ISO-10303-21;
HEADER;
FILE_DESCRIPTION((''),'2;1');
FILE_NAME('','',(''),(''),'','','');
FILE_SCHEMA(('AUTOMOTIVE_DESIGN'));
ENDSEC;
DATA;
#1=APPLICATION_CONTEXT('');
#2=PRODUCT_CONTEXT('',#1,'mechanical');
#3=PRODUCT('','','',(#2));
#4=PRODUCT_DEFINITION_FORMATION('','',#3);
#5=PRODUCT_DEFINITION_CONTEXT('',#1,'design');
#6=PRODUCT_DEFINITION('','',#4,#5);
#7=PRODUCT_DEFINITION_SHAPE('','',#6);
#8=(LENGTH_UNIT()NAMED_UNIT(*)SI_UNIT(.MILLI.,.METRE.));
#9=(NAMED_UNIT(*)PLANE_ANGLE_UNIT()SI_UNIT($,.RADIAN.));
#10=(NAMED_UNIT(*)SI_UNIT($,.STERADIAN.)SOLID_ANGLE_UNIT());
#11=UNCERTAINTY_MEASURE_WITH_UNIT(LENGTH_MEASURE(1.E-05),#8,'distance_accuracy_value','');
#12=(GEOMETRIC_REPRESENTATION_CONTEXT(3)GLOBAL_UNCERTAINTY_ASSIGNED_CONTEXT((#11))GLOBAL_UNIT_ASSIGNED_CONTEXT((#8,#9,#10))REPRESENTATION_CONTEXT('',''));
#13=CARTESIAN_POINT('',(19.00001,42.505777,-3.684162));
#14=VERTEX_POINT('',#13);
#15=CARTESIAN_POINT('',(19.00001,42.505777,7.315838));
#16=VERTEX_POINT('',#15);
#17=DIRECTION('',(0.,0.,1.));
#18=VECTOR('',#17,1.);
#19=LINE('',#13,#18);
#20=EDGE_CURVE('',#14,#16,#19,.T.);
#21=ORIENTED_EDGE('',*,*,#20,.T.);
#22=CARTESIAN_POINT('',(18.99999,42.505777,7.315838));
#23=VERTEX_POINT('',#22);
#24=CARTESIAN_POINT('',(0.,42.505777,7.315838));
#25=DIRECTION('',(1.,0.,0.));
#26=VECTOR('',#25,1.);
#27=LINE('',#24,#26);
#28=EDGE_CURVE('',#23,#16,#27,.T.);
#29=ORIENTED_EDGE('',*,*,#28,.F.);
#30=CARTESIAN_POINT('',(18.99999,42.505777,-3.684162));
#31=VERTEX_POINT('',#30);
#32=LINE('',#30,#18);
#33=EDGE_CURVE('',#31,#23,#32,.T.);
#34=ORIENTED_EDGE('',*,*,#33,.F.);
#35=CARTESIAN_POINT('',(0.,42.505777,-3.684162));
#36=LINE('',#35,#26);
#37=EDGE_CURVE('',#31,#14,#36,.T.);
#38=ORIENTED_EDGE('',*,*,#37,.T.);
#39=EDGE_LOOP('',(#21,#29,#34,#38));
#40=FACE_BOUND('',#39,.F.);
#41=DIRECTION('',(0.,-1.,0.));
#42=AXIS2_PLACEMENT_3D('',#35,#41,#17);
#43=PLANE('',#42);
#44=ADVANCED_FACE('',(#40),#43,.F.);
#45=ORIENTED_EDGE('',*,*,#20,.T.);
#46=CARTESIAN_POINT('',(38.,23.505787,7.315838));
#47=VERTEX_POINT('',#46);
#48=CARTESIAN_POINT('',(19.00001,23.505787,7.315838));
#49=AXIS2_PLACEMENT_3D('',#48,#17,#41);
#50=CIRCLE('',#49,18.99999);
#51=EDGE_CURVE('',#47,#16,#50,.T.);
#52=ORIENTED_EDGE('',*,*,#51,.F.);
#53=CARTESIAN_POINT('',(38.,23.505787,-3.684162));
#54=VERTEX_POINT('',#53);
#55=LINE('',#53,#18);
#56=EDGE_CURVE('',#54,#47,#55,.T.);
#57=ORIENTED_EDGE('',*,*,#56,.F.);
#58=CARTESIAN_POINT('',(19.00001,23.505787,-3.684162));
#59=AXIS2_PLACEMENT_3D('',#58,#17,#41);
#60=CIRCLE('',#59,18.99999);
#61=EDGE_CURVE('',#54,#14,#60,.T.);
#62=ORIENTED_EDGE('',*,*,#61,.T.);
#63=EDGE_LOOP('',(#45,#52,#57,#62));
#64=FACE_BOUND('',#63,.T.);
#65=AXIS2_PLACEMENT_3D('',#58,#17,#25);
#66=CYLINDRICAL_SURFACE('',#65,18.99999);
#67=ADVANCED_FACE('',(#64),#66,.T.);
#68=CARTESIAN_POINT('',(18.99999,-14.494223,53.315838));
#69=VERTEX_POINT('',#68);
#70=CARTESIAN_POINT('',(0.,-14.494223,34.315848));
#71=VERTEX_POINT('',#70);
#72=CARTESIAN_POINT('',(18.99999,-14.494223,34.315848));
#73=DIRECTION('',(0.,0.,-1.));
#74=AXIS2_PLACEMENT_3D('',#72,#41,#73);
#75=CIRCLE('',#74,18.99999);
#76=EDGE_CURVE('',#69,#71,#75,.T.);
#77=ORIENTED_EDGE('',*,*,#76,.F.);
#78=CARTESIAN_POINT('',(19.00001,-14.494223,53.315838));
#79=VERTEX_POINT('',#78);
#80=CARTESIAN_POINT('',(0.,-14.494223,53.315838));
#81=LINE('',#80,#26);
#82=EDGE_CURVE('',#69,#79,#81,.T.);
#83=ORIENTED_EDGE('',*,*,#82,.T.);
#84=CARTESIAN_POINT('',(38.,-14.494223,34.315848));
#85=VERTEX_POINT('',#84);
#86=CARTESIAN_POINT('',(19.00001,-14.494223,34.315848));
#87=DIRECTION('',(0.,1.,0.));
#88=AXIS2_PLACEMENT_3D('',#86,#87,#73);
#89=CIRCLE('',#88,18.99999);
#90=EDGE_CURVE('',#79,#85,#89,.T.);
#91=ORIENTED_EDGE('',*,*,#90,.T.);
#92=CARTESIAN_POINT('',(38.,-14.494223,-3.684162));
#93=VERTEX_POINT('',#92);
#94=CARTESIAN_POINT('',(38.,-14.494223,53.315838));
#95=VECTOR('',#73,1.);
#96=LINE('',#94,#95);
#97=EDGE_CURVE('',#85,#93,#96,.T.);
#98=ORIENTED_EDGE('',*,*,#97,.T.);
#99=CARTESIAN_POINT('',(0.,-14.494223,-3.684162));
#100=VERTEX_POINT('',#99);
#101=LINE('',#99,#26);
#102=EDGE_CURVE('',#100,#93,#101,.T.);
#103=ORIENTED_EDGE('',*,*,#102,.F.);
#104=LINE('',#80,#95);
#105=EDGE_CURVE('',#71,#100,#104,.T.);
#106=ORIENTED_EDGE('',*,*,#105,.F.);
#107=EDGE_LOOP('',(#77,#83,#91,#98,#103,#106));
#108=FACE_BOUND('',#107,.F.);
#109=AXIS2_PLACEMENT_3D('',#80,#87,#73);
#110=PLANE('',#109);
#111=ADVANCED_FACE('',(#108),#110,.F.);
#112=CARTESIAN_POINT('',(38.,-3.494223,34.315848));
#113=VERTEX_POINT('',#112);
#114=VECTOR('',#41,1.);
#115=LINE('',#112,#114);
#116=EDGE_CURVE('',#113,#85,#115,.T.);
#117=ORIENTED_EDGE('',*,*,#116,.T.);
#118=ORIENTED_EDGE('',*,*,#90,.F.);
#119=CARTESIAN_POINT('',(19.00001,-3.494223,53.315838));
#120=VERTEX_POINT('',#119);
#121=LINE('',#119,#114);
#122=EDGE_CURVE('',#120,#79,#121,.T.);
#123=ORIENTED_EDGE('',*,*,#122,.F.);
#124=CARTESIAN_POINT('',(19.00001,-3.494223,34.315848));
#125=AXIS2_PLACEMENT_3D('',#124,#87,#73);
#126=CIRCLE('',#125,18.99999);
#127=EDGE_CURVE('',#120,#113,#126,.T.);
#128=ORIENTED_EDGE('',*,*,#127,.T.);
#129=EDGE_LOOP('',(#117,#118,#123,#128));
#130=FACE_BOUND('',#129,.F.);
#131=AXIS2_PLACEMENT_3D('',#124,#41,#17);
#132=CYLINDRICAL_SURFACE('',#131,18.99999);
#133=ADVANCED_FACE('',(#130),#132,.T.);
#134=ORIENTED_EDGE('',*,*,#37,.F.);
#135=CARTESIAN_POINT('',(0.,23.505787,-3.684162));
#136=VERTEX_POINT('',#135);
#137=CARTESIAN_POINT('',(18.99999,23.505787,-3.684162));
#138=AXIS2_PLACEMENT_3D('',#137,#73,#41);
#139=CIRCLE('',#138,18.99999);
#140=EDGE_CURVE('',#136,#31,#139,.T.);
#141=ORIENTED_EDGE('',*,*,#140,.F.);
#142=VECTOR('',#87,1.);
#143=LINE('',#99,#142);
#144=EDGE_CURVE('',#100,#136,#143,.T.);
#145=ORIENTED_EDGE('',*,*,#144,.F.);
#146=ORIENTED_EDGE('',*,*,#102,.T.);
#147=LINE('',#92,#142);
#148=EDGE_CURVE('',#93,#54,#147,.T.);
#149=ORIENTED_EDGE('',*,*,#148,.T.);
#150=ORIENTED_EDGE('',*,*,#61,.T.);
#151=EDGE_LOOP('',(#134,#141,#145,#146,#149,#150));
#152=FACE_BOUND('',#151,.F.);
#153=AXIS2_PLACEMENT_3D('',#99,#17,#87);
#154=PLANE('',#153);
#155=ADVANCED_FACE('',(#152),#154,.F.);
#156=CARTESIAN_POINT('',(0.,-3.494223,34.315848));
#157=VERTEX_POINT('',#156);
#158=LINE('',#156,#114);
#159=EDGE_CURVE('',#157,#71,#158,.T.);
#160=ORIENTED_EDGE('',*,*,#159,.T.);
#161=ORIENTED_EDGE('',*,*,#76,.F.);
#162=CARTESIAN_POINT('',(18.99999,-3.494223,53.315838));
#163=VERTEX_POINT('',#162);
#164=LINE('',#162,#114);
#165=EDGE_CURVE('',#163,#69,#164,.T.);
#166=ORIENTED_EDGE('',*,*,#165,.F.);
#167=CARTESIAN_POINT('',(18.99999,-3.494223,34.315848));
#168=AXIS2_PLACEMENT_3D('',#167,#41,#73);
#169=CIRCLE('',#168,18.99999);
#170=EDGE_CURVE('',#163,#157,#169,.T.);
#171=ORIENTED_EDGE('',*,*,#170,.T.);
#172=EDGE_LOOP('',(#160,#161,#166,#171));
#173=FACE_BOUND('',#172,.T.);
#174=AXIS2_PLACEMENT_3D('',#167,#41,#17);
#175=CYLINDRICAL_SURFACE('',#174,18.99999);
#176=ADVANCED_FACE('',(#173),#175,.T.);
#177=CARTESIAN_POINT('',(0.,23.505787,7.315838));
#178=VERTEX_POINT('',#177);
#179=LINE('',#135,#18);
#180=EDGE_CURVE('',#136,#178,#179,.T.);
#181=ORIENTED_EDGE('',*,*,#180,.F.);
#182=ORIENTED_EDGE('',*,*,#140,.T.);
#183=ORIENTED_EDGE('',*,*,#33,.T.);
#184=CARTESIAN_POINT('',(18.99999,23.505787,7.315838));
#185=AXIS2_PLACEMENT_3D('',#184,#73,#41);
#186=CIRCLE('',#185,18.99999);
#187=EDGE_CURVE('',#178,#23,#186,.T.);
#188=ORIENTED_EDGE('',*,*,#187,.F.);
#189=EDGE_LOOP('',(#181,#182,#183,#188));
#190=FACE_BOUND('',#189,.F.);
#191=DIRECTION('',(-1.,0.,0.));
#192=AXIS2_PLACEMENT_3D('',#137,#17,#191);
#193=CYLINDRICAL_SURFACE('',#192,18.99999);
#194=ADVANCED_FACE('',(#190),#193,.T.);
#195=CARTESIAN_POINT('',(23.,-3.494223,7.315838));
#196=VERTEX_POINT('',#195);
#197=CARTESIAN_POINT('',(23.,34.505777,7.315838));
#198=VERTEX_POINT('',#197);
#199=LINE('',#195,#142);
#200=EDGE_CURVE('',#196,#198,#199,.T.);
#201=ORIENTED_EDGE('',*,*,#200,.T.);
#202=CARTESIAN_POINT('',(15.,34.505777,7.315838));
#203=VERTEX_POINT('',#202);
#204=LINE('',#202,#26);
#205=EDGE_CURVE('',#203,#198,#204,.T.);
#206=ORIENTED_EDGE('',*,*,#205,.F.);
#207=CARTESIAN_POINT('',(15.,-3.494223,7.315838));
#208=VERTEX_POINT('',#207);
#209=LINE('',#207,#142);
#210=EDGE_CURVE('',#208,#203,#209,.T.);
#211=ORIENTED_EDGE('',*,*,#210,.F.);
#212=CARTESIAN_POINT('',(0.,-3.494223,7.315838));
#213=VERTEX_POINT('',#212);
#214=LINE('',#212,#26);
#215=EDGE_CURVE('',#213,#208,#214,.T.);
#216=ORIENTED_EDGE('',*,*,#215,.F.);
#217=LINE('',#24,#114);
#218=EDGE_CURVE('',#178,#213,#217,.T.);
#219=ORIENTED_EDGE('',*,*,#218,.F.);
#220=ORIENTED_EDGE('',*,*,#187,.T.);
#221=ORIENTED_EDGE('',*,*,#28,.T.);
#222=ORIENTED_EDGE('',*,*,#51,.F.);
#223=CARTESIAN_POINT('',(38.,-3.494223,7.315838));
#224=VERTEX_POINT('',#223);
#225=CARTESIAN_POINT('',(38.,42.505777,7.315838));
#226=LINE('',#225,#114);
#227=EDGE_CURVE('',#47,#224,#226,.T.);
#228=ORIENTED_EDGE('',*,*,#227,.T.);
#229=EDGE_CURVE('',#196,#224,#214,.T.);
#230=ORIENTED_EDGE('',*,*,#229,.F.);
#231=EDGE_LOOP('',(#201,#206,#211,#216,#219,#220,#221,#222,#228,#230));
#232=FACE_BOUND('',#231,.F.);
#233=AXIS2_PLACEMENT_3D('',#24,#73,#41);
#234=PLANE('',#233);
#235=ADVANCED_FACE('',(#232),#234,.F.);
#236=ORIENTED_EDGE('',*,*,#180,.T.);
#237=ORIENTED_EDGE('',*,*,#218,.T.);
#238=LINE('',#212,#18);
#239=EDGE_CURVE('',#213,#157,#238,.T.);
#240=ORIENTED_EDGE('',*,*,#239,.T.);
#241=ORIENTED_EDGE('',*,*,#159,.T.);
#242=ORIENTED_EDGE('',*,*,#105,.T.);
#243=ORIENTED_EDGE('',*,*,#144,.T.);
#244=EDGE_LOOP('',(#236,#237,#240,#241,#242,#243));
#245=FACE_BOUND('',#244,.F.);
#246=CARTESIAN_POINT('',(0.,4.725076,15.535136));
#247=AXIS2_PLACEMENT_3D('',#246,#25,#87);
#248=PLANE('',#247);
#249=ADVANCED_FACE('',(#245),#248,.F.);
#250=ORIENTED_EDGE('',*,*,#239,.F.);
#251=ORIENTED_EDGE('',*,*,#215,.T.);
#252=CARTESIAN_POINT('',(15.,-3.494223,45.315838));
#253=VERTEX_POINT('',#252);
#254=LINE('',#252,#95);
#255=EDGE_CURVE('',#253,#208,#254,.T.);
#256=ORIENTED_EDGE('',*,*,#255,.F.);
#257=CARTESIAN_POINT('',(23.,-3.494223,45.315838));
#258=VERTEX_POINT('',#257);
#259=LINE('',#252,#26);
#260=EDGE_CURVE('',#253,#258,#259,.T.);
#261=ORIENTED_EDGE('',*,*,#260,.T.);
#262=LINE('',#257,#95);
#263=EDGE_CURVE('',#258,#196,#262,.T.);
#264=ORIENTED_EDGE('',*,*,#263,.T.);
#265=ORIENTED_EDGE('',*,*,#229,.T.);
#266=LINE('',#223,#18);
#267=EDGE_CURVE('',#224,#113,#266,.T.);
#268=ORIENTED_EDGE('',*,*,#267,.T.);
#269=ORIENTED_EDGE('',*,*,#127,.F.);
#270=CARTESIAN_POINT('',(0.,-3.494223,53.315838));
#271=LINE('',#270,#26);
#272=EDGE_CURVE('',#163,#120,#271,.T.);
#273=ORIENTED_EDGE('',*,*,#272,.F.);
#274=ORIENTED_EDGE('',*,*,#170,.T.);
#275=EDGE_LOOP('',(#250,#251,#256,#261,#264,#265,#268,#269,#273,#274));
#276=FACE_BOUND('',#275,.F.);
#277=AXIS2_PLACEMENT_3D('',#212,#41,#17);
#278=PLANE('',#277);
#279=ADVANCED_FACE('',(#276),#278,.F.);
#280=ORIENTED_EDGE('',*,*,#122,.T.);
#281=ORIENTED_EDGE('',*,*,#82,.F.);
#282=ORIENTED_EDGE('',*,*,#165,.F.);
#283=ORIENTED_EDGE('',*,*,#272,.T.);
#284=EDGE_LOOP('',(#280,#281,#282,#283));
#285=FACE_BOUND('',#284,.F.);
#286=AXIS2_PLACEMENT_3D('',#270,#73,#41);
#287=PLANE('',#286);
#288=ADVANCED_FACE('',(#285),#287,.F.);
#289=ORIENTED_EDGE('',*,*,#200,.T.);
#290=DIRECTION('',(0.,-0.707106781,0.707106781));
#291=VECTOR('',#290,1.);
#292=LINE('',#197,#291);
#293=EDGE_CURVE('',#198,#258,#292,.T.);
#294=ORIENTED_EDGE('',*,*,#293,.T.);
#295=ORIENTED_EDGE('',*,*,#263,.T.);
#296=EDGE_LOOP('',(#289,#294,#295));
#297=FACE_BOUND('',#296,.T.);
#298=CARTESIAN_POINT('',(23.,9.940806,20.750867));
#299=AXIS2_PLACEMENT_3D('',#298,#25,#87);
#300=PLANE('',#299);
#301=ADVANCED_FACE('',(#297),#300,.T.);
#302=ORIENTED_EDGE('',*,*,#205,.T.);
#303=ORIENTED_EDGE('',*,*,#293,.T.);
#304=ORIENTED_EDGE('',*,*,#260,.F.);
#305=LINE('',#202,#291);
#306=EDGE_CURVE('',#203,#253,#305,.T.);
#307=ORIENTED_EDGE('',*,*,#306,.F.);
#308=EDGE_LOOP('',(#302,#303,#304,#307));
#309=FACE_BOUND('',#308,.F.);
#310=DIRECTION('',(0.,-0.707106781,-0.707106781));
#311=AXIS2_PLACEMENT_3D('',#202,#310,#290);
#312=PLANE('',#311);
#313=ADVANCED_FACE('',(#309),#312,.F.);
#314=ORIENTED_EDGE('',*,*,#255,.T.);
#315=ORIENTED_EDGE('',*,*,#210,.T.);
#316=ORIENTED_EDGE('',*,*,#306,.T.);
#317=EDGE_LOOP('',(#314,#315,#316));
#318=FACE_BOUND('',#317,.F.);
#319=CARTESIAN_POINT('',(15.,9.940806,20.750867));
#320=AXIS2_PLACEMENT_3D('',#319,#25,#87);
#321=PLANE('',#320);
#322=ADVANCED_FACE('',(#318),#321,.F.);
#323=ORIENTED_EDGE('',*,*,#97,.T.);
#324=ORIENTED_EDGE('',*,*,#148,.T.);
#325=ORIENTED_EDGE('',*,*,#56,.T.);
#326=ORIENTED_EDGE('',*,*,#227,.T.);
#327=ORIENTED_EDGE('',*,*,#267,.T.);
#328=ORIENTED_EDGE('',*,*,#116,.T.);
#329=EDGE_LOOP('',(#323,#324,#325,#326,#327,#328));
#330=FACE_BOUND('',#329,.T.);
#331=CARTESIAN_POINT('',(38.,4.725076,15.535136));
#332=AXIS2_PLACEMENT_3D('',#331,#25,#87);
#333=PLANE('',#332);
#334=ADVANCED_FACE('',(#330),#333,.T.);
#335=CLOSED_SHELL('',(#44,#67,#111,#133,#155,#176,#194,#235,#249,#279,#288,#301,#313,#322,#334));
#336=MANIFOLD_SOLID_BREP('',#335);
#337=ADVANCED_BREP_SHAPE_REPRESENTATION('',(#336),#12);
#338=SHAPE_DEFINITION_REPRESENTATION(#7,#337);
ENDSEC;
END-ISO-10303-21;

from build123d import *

# Parameters (mm, degrees)
F1_DEPTH = 38
F2_R     = 18.99999
F3_R     = 18.99999
F6_DEPTH = 8


# Not quite as in the source:
# - a fillet or chamfer is up to 0.001 mm smaller than in the source, because OpenCascade refuses the exact size


with BuildPart() as f1:
    # F0 (on Right) → F1 (new body)
    with BuildSketch(Plane.YZ):
        Polygon((-14.4942225739, 53.3158381923), (-14.4942225739, -3.6841618077), (42.5057774261, -3.6841618077), (42.5057774261, 7.3158381923), (-3.4942225739, 7.3158381923), (-3.4942225739, 53.3158381923), align=None)
    extrude(amount=F1_DEPTH)

    # F2 (radius 19 in the source; OpenCascade refuses exactly that, so slightly less here)
    f2_edges = [f1.edges().sort_by_distance(p)[0] for p in [
        (38, -8.994223, 53.315838),
        (0, -8.994223, 53.315838),
    ]]
    fillet(f2_edges, radius=F2_R)

    # F3 (radius 19 in the source; OpenCascade refuses exactly that, so slightly less here)
    f3_edges = [f1.edges().sort_by_distance(p)[0] for p in [
        (38, 42.505777, 1.815838),
        (0, 42.505777, 1.815838),
    ]]
    fillet(f3_edges, radius=F3_R)

    # F5 (on offset) → F6 (join)
    with BuildSketch(Plane.YZ.offset(15)):
        Polygon((34.5057774261, 7.3158381923), (-3.4942225739, 45.3158381923), (-3.4942225739, 7.3158381923), align=None)
    extrude(amount=F6_DEPTH)


solid = f1.part
